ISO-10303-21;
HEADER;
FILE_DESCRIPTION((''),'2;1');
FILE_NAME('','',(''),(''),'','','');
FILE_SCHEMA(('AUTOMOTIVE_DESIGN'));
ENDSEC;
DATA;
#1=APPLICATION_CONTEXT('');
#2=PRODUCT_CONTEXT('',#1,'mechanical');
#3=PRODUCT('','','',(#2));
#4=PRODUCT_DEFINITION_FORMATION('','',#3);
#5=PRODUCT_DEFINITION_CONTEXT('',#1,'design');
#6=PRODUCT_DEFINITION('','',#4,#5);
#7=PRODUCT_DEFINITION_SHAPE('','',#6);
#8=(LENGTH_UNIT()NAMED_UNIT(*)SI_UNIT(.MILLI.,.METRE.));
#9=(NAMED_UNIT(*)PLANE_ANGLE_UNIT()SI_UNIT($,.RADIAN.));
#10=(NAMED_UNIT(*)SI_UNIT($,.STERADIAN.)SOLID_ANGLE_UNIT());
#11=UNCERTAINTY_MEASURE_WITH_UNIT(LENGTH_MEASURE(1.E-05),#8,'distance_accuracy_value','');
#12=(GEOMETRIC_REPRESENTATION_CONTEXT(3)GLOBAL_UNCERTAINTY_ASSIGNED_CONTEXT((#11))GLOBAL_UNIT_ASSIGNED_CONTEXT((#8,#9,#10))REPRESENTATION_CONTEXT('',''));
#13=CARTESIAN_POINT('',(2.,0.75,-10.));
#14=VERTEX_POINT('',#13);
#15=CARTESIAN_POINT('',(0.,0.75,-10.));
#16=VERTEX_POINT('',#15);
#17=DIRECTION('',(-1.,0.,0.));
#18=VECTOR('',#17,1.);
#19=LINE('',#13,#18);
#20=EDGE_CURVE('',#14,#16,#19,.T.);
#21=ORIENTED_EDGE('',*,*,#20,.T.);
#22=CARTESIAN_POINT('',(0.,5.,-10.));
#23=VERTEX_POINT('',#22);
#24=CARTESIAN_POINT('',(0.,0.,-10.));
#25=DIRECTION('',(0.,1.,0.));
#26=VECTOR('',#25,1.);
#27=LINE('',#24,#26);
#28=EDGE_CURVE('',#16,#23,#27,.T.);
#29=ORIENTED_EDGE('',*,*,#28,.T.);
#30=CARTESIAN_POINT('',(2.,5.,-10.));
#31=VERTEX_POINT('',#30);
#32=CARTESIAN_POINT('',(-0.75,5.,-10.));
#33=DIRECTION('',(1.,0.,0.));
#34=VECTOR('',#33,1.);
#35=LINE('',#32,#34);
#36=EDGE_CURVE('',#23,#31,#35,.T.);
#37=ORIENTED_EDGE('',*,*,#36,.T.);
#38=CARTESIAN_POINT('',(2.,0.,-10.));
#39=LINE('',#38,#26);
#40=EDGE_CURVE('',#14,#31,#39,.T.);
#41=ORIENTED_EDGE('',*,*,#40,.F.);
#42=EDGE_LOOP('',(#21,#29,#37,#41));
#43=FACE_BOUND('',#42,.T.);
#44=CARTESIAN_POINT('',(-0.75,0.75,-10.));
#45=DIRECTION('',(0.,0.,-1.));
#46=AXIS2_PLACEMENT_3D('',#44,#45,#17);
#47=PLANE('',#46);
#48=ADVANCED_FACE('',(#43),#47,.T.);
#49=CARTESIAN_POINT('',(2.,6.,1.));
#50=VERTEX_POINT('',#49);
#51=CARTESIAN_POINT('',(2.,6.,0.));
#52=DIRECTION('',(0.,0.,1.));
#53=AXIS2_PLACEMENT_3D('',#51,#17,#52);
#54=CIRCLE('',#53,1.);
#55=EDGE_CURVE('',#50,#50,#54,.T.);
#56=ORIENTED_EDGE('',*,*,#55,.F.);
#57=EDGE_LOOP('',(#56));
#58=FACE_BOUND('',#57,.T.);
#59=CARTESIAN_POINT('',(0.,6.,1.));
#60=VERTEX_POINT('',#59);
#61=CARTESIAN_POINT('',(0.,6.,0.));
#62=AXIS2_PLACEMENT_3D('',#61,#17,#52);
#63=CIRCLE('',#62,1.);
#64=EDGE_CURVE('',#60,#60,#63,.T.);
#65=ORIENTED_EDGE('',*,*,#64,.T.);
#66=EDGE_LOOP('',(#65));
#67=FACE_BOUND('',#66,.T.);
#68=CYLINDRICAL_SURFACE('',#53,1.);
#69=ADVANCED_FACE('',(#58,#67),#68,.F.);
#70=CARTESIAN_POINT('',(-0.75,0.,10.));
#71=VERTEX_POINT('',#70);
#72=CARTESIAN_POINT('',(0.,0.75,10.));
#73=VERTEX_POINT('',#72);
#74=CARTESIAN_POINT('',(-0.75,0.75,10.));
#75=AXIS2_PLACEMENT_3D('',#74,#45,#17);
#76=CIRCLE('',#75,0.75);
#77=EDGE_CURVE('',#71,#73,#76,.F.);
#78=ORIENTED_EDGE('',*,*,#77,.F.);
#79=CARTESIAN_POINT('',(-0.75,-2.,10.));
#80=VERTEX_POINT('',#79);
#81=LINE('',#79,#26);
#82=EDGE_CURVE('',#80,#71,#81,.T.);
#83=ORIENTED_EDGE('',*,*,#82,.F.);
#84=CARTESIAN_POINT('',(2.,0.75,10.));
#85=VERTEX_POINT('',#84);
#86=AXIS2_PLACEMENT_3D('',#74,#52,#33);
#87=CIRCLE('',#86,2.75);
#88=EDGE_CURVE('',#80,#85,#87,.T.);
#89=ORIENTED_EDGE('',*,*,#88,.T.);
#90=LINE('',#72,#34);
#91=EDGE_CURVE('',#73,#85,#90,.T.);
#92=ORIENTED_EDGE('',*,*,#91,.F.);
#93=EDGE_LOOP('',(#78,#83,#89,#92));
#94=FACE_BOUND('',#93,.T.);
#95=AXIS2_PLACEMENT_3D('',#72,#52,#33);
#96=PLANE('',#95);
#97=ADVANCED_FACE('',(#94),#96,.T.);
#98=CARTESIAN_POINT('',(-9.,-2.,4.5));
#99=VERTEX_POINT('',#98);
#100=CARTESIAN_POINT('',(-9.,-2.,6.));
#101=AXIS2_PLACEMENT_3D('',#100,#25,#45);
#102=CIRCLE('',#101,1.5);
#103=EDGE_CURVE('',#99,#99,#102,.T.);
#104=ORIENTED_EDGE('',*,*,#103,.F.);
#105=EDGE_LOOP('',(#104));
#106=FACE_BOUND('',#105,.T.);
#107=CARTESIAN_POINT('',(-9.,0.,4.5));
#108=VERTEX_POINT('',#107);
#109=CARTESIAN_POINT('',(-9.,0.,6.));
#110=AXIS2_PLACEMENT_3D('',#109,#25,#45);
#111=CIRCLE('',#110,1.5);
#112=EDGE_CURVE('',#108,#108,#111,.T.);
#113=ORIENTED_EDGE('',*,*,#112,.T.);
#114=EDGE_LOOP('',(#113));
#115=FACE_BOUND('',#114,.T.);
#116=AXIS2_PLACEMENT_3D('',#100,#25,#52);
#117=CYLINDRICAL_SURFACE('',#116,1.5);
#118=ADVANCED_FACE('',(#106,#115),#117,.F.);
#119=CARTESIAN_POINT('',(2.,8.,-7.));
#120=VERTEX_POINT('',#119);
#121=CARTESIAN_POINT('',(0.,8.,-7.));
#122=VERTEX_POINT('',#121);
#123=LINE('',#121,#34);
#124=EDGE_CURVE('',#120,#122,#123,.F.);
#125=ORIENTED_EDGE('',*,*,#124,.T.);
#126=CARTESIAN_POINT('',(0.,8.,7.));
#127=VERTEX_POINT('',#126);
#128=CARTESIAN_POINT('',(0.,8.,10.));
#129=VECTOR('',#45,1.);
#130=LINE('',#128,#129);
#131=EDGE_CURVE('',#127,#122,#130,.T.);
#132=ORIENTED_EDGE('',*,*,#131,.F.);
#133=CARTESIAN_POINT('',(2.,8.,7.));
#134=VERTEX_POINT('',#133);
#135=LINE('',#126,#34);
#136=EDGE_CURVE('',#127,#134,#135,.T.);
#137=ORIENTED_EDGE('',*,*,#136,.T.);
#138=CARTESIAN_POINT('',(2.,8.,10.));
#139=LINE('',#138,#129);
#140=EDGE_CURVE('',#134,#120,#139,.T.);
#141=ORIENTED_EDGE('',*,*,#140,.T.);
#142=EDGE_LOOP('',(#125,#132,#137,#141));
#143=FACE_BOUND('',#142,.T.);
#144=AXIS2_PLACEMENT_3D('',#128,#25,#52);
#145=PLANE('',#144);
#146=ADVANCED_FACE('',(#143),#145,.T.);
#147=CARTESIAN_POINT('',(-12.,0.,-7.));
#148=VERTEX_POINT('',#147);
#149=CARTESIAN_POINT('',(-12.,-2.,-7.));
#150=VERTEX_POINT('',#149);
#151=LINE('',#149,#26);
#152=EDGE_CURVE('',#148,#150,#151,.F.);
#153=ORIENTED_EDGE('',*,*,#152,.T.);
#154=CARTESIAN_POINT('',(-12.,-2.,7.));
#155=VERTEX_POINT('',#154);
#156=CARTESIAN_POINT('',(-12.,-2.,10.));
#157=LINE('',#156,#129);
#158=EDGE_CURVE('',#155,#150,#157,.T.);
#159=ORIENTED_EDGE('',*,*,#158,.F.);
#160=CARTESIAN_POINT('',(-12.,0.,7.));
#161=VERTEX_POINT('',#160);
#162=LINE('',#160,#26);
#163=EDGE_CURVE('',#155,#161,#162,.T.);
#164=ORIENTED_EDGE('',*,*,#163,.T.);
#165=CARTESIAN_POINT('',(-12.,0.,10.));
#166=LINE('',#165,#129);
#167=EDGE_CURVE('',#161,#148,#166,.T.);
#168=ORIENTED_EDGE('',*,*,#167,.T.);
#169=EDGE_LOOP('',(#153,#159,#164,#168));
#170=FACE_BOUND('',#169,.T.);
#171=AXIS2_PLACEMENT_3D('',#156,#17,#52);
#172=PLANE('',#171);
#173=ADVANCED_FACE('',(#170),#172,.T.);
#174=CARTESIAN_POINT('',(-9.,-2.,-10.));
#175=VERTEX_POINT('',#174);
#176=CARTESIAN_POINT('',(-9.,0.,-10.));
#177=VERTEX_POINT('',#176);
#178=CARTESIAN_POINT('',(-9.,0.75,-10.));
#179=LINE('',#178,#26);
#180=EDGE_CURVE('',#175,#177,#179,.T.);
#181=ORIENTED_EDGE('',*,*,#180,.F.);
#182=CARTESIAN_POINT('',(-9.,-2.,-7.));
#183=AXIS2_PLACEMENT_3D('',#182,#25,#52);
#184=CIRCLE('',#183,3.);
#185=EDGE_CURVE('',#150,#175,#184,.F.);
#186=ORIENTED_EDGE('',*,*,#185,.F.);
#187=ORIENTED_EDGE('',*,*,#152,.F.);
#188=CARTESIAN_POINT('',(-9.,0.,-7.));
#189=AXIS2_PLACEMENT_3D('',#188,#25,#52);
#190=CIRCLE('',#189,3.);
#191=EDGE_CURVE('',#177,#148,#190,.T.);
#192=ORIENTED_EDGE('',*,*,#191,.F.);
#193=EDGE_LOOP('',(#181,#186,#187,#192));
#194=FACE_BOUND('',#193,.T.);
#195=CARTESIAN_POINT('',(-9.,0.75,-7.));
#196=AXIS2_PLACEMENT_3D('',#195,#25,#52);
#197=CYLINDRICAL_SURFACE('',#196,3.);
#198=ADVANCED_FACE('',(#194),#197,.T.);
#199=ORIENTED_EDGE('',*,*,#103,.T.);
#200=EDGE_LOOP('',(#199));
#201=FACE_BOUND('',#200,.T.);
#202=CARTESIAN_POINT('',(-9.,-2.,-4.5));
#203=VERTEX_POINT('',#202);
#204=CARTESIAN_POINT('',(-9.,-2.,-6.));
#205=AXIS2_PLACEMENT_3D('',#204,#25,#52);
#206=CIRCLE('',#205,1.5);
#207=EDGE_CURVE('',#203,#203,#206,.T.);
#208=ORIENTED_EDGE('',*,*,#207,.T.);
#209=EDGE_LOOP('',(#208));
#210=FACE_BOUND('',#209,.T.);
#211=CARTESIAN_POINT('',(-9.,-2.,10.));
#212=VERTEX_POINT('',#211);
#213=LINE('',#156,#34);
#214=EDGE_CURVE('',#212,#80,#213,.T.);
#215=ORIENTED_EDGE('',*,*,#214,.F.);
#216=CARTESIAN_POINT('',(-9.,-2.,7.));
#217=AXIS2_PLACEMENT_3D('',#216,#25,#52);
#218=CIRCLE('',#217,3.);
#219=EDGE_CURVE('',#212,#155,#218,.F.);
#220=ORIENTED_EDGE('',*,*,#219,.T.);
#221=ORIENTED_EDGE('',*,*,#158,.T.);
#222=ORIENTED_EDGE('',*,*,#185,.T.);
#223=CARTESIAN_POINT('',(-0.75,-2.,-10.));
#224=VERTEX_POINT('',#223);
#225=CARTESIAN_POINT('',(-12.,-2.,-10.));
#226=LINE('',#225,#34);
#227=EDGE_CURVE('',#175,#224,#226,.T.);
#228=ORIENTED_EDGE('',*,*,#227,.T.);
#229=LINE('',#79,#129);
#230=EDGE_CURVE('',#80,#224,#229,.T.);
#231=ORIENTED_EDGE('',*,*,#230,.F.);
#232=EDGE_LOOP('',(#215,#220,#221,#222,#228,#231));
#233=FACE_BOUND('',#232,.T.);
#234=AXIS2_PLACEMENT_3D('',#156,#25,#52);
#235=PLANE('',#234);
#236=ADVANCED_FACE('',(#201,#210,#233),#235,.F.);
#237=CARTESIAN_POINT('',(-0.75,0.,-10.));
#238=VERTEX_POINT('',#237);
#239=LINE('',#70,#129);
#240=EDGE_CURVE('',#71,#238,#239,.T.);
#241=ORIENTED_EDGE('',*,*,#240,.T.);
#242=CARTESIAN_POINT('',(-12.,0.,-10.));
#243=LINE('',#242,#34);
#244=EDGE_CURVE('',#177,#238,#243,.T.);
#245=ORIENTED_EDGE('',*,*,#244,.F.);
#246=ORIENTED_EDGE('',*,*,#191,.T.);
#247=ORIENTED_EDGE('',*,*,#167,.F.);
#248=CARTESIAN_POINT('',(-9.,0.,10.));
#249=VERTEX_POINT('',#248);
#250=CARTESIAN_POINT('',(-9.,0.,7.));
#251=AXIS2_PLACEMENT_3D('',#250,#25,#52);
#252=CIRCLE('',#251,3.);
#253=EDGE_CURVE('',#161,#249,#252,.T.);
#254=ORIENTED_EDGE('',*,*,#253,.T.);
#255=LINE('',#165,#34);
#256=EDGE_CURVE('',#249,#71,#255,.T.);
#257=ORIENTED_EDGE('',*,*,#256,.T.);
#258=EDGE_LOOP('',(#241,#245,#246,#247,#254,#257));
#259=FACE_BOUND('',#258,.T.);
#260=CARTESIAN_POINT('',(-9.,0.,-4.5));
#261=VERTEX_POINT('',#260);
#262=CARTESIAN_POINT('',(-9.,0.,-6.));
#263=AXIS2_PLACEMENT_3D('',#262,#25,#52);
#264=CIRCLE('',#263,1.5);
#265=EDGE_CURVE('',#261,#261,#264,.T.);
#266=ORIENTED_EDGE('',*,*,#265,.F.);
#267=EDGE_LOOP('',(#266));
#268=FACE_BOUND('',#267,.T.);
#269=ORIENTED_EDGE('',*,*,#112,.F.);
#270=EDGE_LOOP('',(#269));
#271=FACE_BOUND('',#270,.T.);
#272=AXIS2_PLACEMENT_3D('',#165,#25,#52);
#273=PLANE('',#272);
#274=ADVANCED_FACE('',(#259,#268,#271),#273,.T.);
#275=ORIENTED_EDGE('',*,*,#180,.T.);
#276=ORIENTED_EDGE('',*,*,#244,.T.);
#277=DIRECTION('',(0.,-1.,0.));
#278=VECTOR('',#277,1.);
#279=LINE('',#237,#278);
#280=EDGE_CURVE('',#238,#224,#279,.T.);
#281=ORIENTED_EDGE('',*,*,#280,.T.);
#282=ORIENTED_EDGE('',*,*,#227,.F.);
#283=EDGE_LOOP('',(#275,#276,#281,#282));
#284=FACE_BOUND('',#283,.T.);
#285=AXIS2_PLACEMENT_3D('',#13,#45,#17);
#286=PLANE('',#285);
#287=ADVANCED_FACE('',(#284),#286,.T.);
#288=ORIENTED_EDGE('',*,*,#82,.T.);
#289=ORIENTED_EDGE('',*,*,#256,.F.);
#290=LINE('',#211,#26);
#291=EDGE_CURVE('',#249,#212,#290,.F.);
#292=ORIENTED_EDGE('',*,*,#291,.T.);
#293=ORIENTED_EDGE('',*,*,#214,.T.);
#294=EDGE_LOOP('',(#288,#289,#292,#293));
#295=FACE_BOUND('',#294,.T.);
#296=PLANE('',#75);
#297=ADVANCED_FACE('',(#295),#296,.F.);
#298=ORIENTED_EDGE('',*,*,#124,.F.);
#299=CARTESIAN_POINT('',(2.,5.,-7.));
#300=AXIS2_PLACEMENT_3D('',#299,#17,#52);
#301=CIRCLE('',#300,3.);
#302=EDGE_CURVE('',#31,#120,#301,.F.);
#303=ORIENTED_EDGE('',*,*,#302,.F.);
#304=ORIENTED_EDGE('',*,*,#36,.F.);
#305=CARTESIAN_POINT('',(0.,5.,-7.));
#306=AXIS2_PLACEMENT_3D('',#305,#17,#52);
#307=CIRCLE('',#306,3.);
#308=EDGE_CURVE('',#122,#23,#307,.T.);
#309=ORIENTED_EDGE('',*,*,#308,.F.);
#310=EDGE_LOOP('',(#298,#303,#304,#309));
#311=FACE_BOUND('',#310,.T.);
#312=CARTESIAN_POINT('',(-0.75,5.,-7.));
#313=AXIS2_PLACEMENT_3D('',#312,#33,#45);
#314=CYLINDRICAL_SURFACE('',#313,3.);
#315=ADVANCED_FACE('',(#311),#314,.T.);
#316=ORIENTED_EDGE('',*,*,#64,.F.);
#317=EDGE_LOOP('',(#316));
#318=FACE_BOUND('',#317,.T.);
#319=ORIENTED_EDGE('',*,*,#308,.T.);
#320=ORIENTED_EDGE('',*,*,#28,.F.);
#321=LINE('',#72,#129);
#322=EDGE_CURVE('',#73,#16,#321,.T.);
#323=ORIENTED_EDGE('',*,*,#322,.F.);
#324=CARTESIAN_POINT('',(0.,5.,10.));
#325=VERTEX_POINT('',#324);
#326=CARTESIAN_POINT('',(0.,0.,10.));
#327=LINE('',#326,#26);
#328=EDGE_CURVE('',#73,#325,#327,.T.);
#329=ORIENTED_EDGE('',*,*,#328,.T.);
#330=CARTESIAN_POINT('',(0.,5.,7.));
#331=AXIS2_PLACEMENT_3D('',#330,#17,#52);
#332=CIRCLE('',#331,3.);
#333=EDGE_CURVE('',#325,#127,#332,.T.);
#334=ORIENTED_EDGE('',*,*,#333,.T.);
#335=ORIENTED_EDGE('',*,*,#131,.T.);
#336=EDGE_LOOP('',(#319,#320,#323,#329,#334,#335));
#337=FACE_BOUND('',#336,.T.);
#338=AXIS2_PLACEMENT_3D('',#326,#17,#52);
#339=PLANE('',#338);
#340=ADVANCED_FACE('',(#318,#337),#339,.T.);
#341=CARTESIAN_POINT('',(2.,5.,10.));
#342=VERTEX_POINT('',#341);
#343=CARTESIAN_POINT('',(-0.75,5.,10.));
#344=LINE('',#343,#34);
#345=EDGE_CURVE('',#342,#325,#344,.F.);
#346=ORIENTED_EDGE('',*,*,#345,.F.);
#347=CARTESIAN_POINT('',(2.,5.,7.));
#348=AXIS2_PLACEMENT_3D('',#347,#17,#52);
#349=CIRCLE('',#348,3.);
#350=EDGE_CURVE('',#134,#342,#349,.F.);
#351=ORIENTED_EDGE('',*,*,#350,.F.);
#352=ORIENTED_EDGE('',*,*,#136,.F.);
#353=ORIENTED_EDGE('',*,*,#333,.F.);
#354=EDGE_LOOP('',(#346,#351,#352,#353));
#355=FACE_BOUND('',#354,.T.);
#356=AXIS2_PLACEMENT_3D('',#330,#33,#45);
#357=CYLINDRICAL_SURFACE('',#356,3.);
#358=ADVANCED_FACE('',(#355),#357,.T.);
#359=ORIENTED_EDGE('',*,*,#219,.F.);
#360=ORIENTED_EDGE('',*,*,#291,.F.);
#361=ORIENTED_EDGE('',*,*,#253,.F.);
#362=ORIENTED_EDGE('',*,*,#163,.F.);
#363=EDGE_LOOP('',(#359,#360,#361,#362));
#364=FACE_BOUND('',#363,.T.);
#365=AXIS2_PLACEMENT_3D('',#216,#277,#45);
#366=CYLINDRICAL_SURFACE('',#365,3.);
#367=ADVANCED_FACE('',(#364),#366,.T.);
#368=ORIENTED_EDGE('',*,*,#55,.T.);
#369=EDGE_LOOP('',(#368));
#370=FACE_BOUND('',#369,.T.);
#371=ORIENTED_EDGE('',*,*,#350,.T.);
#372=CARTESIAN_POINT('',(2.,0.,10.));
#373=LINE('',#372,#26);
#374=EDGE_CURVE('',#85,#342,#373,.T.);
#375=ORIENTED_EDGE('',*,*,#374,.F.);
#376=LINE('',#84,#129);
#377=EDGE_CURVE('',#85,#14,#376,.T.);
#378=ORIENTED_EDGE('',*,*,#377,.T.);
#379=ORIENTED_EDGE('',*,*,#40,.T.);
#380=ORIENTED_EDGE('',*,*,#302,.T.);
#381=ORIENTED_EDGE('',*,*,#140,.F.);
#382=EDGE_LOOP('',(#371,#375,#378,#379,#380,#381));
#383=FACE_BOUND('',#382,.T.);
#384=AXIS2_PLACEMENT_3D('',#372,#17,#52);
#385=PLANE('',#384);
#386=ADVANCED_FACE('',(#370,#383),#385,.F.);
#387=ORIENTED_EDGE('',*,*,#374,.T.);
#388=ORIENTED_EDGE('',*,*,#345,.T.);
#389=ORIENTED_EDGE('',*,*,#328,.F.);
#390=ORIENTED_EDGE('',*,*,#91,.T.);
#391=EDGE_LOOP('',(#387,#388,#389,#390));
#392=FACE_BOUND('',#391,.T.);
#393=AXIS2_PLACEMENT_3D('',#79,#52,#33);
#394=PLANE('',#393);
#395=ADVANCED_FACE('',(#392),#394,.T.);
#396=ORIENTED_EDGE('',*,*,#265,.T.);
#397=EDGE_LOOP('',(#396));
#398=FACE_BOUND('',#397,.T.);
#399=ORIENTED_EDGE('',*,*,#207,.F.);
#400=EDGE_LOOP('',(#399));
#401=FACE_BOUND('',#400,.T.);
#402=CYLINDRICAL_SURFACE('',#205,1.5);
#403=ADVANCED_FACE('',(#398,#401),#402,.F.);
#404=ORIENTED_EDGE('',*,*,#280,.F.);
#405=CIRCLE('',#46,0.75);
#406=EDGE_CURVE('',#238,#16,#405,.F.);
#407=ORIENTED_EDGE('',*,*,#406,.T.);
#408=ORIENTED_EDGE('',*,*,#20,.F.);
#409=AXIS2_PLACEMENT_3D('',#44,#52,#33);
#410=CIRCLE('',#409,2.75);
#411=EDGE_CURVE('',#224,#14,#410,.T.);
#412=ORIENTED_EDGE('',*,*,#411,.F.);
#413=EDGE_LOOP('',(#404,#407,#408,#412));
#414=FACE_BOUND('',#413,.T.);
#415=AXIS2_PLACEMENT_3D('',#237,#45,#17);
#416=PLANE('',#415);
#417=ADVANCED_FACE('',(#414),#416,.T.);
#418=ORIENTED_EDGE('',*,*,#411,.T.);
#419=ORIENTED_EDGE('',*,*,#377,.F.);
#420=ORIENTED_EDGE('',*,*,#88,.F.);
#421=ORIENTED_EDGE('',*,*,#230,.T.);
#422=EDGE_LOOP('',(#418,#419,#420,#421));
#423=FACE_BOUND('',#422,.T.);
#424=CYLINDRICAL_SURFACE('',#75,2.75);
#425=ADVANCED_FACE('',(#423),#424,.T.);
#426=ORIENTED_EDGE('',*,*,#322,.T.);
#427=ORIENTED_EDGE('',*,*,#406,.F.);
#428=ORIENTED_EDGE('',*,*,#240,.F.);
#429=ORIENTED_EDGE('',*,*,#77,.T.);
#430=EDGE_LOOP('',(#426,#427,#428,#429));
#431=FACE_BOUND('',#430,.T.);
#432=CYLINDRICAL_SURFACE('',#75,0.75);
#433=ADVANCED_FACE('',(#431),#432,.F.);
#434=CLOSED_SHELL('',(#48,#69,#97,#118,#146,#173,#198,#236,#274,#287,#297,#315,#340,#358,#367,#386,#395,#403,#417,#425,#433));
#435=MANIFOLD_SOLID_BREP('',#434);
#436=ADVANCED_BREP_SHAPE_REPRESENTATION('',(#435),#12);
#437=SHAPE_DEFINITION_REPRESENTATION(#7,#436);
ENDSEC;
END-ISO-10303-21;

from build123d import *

# Parameters (mm, degrees)
BASE_FLANGE1_DEPTH = 10
FILLET1_R          = 3
SKETCH8_R          = 1.5
CUT_EXTRUDE1_DEPTH = 18.549928775
SKETCH9_R          = 1
CUT_EXTRUDE2_DEPTH = 18.549928775


# Sheet-metal steps are written as plain solids
with BuildPart() as part:
    # Sketch2 → Base-Flange1 (new, symmetric)
    with BuildSketch(Plane.XY):
        with BuildLine():
            Line((-12, 0), (-0.75, 0))
            ThreePointArc((-0.75, 0), (-0.219669914, 0.219669914), (0, 0.75))
            Line((0, 0.75), (0, 8))
            Line((0, 8), (2, 8))
            Line((2, 8), (2, 0.75))
            ThreePointArc((2, 0.75), (1.194543648, -1.194543648), (-0.75, -2))
            Line((-0.75, -2), (-12, -2))
            Line((-12, -2), (-12, 0))
        make_face()
    extrude(amount=BASE_FLANGE1_DEPTH, both=True)

    # Fillet1
    fillet1_edges = [part.edges().sort_by_distance(p)[0] for p in [
        (-12, -1, 10),
        (1, 8, 10),
        (-12, -1, -10),
        (1, 8, -10),
    ]]
    fillet(fillet1_edges, radius=FILLET1_R)

    # Sketch8 → Cut-Extrude1 (cut, through all)
    with BuildSketch(Plane(origin=(0, 0, 0), x_dir=(1, 0, 0), z_dir=(0, 1, 0))):
        with Locations(Location((-9, 6, 0), (0, 0, 270))):
            Circle(SKETCH8_R)
        with Locations(Location((-9, -6, 0), (0, 0, 90))):
            Circle(SKETCH8_R)
    extrude(amount=-CUT_EXTRUDE1_DEPTH, mode=Mode.SUBTRACT)

    # Sketch9 → Cut-Extrude2 (cut, through all)
    with BuildSketch(Plane.ZY):
        with Locations((0, 6)):
            Circle(SKETCH9_R)
    extrude(amount=-CUT_EXTRUDE2_DEPTH, mode=Mode.SUBTRACT)


solid = part.part
